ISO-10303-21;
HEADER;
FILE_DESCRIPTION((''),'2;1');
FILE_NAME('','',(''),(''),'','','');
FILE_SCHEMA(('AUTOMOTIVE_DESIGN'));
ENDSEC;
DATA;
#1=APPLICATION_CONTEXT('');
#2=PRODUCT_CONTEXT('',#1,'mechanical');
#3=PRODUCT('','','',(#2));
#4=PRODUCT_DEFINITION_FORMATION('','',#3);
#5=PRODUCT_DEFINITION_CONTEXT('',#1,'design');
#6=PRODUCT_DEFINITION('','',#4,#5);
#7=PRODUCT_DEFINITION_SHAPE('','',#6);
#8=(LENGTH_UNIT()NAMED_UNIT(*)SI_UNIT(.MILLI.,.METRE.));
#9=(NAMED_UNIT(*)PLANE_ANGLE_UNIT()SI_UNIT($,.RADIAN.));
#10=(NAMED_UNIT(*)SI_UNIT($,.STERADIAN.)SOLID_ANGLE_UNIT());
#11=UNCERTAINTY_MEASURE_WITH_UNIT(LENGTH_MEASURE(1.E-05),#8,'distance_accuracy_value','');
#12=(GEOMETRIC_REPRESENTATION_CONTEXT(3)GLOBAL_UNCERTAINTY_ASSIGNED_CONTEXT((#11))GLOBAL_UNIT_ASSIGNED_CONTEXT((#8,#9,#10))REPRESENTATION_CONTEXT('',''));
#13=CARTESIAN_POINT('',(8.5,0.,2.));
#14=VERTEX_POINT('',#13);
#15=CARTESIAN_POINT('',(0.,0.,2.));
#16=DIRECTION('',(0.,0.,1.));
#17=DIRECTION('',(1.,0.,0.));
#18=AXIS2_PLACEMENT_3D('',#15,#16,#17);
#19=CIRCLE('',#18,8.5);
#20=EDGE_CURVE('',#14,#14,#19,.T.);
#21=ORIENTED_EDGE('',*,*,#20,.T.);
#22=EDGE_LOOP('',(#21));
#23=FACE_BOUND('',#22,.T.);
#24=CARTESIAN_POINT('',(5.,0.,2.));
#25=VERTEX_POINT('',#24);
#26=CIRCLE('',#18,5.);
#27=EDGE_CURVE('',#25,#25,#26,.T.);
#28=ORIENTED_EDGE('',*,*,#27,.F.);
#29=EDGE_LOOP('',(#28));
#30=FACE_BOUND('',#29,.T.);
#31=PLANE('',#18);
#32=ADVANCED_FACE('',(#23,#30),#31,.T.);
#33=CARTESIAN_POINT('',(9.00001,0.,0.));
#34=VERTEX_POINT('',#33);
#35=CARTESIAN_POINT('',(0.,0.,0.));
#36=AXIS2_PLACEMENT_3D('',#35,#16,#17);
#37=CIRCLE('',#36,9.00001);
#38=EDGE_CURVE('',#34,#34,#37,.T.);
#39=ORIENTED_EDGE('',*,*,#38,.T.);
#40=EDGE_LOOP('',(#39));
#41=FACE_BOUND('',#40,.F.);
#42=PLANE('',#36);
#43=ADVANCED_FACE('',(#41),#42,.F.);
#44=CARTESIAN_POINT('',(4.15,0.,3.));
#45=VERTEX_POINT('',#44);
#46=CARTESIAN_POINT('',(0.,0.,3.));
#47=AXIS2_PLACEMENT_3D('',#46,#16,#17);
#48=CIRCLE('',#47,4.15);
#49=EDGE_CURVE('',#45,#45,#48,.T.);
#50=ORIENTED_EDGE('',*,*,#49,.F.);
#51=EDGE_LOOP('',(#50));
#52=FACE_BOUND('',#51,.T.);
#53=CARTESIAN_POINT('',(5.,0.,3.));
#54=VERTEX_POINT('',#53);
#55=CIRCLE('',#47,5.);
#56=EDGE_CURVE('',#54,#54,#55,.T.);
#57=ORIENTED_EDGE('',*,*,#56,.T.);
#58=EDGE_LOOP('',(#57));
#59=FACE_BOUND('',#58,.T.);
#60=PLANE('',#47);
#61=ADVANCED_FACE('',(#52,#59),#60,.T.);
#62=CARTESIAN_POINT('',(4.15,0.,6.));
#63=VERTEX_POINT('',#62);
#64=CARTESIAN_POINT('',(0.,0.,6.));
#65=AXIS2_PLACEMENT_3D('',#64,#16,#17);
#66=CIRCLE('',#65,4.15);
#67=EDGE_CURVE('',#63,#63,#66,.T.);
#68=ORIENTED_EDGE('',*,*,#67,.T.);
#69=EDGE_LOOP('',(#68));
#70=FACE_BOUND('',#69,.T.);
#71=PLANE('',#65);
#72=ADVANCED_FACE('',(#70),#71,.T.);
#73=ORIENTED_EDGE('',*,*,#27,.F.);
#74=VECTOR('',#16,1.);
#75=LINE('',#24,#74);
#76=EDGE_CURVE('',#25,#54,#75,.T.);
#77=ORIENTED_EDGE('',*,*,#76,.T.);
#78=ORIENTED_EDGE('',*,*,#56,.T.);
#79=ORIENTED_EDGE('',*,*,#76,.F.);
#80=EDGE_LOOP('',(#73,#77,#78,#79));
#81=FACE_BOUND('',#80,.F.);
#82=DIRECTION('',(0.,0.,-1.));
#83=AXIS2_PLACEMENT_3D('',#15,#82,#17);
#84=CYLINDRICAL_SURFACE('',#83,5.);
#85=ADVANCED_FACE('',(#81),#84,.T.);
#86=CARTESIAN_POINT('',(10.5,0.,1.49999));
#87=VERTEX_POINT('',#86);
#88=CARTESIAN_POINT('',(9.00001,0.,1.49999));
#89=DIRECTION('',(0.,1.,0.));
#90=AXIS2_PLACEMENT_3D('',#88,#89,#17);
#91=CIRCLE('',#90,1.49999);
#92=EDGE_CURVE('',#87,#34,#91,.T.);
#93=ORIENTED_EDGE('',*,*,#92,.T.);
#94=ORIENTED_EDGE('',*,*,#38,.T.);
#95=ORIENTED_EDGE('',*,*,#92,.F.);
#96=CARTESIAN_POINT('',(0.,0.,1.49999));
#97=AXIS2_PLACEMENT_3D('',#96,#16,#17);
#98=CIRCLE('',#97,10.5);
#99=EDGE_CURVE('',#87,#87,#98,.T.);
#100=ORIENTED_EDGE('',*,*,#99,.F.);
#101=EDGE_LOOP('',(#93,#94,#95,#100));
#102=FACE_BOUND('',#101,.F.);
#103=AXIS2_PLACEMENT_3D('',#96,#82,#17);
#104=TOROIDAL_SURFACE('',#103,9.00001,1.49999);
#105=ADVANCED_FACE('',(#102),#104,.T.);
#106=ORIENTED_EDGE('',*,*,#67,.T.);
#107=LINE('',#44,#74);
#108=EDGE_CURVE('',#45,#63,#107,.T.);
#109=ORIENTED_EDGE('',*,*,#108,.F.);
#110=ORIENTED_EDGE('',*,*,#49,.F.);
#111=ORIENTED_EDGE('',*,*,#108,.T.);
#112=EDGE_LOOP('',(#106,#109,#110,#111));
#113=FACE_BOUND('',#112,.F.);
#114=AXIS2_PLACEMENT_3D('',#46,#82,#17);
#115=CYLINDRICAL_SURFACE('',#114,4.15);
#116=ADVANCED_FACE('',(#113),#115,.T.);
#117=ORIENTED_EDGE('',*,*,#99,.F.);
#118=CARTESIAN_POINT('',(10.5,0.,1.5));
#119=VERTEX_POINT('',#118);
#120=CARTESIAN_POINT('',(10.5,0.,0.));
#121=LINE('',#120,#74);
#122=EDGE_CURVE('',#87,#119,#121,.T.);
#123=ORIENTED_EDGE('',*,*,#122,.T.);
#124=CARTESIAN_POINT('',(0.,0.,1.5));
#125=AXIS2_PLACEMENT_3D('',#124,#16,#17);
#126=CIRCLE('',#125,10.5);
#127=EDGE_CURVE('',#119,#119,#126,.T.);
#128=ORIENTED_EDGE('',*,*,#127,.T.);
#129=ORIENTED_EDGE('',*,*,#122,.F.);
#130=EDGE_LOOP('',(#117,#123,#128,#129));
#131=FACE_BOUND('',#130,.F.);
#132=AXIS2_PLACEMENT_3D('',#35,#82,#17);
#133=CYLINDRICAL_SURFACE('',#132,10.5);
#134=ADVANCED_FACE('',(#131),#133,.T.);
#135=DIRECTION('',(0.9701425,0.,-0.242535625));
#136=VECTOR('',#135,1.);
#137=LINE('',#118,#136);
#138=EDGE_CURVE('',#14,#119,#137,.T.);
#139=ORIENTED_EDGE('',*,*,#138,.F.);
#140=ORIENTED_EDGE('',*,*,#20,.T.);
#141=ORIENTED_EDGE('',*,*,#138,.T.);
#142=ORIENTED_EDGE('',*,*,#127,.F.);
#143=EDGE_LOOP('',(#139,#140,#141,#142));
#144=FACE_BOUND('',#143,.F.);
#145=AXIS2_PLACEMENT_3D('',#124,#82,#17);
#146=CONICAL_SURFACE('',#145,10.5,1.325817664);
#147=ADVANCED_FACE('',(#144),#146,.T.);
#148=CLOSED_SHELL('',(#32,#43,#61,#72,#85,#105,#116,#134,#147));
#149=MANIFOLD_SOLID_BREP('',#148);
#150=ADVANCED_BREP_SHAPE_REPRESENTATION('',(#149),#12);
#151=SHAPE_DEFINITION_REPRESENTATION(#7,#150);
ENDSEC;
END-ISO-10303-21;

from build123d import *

# Parameters (mm, degrees)
F0_R     = 10.5
F1_DEPTH = 2
F2_R     = 5
F3_DEPTH = 1
F4_R     = 4.15
F5_DEPTH = 3
F6_SIZE2 = 0.5
F6_SIZE  = 2
F7_R     = 1.49999


# Not quite as in the source:
# - a fillet or chamfer is up to 0.001 mm smaller than in the source, because OpenCascade refuses the exact size


with BuildPart() as f1:
    # F0 (on Top) → F1 (new body)
    with BuildSketch(Plane.XY):
        Circle(F0_R)
    extrude(amount=F1_DEPTH)

    # F2 (on face) → F3 (join)
    with BuildSketch(Plane.XY.offset(2)):
        Circle(F2_R)
    extrude(amount=F3_DEPTH)

    # F4 (on face) → F5 (join)
    with BuildSketch(Plane.XY.offset(3)):
        Circle(F4_R)
    extrude(amount=F5_DEPTH)

    # F6
    f6_edges = [f1.edges().sort_by_distance(p)[0] for p in [
        (-10.5, 0, 2),
    ]]
    f6_side = f1.faces().sort_by_distance((-10.203015, 0, 2))[0]
    chamfer(f6_edges, length=F6_SIZE, length2=F6_SIZE2, reference=f6_side)

    # F7 (radius 1.5 in the source; OpenCascade refuses exactly that, so slightly less here)
    f7_edges = [f1.edges().sort_by_distance(p)[0] for p in [
        (-10.5, 0, 0),
    ]]
    fillet(f7_edges, radius=F7_R)


solid = f1.part
